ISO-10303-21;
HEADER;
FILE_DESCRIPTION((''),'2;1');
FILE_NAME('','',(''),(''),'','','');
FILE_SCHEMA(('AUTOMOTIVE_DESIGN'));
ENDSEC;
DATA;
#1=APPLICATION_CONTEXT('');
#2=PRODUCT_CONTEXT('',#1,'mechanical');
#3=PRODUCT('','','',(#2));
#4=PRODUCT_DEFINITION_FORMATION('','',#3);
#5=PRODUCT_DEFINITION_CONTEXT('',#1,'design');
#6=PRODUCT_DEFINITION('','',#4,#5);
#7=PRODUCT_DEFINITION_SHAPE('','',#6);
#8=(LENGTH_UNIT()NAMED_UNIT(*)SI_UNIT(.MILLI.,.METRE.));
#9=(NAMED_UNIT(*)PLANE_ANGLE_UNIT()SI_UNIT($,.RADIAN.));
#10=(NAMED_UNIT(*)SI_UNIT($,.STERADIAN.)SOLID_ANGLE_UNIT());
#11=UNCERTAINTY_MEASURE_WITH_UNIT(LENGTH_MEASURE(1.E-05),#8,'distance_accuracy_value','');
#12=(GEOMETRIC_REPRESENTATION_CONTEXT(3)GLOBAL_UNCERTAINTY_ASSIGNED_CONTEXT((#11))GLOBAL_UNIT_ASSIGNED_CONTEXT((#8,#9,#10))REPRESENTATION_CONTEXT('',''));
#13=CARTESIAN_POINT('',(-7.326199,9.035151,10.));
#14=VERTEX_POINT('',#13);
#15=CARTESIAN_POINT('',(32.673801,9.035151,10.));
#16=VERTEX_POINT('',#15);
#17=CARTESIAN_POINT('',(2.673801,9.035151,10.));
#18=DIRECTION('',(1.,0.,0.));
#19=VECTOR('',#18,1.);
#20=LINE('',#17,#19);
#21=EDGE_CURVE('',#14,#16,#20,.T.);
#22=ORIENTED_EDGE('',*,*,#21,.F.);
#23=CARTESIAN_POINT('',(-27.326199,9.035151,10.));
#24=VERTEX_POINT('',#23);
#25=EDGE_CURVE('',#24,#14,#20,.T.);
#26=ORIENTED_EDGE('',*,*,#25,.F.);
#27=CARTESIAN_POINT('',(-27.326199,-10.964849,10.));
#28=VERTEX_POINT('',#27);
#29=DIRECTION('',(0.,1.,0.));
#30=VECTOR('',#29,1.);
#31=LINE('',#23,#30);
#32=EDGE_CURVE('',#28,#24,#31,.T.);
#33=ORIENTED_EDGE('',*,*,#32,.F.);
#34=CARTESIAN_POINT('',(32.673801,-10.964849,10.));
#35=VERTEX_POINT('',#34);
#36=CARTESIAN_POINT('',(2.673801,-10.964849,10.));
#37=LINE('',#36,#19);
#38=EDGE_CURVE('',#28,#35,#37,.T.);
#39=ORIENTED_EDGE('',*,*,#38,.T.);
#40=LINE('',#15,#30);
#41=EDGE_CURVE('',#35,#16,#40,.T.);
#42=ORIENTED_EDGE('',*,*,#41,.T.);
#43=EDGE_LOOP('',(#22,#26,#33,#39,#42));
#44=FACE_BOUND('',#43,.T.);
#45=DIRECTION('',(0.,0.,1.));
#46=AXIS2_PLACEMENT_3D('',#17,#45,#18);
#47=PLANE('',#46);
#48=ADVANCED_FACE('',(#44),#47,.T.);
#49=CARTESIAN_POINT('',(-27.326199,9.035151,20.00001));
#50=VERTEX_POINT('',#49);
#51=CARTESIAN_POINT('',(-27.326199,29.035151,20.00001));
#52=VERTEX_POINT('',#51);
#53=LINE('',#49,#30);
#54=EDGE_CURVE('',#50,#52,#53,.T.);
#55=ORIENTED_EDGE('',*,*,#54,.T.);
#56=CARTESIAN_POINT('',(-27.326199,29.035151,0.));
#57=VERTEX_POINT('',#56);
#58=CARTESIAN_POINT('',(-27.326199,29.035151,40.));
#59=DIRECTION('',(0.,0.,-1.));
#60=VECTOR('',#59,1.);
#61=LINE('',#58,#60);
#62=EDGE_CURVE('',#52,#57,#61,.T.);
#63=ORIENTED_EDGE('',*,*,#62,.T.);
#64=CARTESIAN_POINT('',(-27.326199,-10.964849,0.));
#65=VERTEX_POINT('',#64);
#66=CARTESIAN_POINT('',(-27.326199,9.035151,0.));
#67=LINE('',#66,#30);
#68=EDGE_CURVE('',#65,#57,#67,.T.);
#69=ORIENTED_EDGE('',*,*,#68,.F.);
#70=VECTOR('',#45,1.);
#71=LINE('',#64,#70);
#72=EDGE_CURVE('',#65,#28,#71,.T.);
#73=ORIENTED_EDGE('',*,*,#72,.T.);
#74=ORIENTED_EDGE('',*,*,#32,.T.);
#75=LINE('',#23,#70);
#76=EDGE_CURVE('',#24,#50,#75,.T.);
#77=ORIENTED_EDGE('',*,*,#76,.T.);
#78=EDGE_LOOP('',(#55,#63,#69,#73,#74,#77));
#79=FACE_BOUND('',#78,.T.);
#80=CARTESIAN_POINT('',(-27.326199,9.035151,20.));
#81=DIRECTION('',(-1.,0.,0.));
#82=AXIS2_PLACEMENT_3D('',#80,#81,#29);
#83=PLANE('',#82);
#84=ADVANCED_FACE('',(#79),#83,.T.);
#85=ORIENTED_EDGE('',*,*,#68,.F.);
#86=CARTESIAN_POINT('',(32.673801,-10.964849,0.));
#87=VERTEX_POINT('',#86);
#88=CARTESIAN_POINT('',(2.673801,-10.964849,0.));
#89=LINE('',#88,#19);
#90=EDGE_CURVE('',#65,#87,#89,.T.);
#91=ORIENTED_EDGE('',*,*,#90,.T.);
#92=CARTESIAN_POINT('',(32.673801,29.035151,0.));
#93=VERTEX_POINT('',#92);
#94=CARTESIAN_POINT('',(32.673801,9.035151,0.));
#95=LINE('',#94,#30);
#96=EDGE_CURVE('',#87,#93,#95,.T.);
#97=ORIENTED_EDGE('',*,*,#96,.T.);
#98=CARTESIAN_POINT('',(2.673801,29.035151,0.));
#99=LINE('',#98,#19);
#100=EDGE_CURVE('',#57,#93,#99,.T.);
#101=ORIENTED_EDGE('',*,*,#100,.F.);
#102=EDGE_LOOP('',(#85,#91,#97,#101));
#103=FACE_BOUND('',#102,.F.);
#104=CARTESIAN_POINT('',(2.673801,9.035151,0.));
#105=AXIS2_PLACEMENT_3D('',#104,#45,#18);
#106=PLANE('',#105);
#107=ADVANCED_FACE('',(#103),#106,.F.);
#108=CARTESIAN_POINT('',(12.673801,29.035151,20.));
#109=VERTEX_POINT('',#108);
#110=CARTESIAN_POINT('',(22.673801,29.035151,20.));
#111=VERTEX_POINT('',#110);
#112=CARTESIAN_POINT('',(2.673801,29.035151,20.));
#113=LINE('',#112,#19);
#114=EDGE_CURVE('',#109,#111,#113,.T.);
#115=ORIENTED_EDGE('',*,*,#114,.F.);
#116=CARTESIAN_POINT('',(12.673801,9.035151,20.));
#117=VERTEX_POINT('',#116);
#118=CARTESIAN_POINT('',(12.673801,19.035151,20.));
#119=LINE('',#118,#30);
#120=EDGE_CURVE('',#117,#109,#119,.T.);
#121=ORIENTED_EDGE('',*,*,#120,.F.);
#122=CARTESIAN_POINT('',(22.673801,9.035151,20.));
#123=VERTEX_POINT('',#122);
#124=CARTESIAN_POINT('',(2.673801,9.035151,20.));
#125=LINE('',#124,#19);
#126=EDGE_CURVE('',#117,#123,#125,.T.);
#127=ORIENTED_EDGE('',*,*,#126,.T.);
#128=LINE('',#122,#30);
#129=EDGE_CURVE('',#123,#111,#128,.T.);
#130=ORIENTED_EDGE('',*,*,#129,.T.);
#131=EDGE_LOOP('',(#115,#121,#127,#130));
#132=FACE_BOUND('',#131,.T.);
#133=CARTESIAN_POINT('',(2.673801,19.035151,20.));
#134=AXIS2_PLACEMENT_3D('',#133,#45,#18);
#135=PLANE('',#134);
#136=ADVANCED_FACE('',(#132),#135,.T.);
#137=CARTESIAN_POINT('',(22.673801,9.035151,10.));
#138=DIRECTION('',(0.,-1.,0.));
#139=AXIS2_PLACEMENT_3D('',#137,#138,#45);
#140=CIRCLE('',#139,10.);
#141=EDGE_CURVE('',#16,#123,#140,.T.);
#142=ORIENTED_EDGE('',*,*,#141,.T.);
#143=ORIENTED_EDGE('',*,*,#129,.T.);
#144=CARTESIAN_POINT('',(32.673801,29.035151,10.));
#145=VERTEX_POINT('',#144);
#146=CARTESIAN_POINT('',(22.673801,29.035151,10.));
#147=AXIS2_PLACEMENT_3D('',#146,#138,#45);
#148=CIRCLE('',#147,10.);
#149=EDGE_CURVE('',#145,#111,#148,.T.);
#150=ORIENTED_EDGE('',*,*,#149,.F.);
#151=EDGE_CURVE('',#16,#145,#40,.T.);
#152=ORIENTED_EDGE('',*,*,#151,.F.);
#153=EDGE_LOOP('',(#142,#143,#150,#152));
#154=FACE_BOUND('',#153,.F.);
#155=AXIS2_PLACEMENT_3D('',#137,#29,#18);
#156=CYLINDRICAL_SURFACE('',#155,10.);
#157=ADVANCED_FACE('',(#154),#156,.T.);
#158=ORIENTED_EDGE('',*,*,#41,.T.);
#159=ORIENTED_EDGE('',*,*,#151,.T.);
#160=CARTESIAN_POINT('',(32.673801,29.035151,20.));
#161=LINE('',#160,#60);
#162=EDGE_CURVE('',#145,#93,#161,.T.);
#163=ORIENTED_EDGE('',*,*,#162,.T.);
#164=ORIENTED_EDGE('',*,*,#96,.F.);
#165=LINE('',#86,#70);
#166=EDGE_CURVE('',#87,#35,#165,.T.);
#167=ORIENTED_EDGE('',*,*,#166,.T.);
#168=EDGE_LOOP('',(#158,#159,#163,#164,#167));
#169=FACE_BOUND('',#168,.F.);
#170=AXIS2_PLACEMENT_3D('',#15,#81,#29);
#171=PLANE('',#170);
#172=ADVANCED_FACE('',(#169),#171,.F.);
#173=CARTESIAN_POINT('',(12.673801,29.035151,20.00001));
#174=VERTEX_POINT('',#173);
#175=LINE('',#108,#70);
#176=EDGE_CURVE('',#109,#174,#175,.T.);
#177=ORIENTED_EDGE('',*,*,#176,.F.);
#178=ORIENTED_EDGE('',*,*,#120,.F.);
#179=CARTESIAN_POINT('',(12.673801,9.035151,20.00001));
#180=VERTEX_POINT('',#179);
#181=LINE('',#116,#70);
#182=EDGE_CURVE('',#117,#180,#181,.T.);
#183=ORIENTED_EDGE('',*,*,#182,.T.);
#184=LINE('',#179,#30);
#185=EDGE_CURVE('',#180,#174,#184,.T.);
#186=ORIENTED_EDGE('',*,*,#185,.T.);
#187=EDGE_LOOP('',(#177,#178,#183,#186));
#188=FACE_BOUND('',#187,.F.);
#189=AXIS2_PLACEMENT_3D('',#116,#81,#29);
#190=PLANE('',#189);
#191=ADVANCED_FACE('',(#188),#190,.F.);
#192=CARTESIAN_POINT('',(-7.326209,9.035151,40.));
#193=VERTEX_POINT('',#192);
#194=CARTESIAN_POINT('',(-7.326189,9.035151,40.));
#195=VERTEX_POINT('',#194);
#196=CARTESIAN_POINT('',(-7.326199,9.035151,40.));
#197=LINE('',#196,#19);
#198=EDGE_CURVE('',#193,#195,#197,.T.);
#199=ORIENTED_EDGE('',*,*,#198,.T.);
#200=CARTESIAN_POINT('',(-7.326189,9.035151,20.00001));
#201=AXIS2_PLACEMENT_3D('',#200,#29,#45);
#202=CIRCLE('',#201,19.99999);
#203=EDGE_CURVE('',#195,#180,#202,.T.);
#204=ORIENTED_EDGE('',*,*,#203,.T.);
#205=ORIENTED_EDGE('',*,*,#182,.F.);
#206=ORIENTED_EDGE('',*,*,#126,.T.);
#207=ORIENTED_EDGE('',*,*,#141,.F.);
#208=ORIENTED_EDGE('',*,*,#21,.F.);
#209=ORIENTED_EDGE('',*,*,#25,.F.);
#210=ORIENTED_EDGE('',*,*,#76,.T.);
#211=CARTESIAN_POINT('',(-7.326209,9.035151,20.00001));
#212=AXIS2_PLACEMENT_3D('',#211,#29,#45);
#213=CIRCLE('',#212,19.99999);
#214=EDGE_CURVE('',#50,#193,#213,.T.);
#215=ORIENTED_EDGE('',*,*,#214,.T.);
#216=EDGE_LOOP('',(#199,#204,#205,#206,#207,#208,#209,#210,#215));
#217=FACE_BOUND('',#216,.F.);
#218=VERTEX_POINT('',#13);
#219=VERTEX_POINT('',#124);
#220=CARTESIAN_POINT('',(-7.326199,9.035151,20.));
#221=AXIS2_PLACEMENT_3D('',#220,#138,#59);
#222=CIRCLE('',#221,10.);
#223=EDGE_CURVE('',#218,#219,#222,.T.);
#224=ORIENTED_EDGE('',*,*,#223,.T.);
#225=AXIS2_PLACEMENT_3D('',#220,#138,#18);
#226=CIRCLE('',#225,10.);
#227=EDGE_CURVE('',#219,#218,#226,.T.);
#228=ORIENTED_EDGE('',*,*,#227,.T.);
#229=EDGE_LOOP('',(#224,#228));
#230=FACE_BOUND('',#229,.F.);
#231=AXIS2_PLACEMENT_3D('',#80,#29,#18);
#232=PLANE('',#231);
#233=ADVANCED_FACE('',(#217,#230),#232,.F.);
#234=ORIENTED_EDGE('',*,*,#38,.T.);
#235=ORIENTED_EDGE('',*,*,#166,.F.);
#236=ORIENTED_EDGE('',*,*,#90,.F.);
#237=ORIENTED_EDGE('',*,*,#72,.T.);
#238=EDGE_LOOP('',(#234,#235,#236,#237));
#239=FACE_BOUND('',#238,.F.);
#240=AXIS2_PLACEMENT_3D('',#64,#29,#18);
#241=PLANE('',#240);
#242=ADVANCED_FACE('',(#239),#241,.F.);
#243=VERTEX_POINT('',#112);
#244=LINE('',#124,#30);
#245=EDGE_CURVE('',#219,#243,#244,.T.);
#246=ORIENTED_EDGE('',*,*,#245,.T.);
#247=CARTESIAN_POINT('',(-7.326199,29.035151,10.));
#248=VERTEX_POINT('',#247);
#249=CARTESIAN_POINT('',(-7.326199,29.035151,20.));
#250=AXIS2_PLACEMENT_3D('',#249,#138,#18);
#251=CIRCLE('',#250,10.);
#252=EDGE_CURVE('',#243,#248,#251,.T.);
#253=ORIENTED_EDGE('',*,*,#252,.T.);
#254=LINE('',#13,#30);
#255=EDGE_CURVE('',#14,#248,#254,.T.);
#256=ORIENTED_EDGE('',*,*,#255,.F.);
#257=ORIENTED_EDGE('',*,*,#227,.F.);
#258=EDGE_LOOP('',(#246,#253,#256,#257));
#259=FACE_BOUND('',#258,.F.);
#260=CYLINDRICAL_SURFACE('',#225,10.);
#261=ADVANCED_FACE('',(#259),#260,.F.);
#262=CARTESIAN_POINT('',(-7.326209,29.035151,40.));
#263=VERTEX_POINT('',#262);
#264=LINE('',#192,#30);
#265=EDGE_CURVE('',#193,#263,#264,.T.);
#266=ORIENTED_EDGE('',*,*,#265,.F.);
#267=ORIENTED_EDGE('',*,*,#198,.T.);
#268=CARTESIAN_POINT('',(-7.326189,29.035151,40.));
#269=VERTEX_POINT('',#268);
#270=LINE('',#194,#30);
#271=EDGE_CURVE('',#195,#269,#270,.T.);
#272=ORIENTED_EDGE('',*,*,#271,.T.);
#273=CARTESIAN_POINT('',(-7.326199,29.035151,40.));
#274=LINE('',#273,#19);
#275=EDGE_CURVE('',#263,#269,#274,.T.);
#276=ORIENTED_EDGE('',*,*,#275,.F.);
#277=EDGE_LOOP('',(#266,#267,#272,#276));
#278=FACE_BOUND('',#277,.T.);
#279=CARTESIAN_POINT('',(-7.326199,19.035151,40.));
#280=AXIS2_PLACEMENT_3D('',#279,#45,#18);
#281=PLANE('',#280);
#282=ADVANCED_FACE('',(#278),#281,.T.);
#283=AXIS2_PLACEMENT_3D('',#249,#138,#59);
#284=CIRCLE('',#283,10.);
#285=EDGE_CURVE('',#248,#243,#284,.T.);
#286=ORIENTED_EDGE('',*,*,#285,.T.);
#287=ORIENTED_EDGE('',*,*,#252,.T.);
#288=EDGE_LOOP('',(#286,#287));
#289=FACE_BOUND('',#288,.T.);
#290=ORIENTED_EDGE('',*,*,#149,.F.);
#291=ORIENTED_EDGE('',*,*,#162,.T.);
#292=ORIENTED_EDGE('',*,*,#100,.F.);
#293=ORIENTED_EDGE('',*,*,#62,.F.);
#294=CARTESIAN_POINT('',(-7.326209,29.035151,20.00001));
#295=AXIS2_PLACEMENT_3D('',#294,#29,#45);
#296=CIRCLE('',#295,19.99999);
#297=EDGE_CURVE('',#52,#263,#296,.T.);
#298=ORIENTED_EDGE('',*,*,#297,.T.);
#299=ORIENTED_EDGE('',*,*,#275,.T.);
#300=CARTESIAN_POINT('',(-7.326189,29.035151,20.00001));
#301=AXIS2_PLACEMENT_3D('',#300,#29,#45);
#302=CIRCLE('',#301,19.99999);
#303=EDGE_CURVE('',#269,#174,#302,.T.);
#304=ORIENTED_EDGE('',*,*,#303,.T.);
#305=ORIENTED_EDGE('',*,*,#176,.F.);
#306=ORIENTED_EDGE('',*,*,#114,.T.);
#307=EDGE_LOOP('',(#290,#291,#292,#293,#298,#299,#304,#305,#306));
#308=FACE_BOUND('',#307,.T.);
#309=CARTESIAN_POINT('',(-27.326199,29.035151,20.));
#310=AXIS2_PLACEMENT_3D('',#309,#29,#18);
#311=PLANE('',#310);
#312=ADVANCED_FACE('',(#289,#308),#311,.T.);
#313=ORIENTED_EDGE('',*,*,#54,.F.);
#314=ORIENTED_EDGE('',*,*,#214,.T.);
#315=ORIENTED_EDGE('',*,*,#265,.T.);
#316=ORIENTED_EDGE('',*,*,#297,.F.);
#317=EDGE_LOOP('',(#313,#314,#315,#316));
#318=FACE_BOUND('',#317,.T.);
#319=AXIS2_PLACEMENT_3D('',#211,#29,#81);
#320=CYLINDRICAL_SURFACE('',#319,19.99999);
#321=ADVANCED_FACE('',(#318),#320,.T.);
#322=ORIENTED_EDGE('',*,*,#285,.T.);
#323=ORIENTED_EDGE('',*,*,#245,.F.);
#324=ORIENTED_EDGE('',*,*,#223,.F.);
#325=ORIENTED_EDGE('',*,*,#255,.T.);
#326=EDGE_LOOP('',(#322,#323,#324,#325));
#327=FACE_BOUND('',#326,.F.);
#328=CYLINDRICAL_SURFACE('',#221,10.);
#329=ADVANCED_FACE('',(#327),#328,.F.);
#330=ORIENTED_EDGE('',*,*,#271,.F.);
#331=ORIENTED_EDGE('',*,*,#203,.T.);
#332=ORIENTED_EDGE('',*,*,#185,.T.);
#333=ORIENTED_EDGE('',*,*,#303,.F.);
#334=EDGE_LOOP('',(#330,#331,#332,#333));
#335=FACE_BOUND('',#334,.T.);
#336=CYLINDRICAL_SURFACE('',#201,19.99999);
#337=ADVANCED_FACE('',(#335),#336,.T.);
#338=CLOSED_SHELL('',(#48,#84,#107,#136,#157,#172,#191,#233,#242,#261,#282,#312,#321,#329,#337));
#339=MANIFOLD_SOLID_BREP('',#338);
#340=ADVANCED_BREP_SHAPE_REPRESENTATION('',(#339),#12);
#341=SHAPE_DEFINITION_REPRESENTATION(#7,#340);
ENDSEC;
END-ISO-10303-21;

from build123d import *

# Parameters (mm, degrees)
F0_W     = 60
F0_H     = 40
F1_DEPTH = 10
F2_W     = 60
F2_H     = 20
F3_DEPTH = 10
F4_R     = 10
F5_W     = 40
F5_H     = 20
F6_DEPTH = 20
F8_DEPTH = 20
F9_R     = 19.99999


# Not quite as in the source:
# - a fillet or chamfer is up to 0.001 mm smaller than in the source, because OpenCascade refuses the exact size


with BuildPart() as f1:
    # F0 (on Top) → F1 (new body)
    with BuildSketch(Plane.XY):
        with Locations((2.6738010347, 9.0351510644)):
            Rectangle(F0_W, F0_H)
    extrude(amount=F1_DEPTH)

    # F2 (on face) → F3 (join)
    with BuildSketch(Plane.XY.offset(10)):
        with Locations((2.6738010347, 19.0351510644)):
            Rectangle(F2_W, F2_H)
    extrude(amount=F3_DEPTH)

    # F4
    f4_edges = [f1.edges().sort_by_distance(p)[0] for p in [
        (32.673801, 19.035151, 20),
    ]]
    fillet(f4_edges, radius=F4_R)

    # F5 (on face) → F6 (join)
    with BuildSketch(Plane.XY.offset(20)):
        with Locations((-7.3261989653, 19.0351510644)):
            Rectangle(F5_W, F5_H)
    extrude(amount=F6_DEPTH)

    # F7 (on face) → F8 (cut)
    with BuildSketch(Plane.XZ.offset(-9.0351510644)):
        with BuildLine():
            ThreePointArc((2.6738010347, 20), (-14.3972667772, 27.0710678119), (-7.3261989653, 10))
            ThreePointArc((-7.3261989653, 10), (-0.2551311534, 12.9289321881), (2.6738010347, 20))
        make_face()
    extrude(amount=-F8_DEPTH, mode=Mode.SUBTRACT)

    # F9 (radius 20 in the source; OpenCascade refuses exactly that, so slightly less here)
    f9_edges = [f1.edges().sort_by_distance(p)[0] for p in [
        (-27.326199, 19.035151, 40),
        (12.673801, 19.035151, 40),
    ]]
    fillet(f9_edges, radius=F9_R)


solid = f1.part
